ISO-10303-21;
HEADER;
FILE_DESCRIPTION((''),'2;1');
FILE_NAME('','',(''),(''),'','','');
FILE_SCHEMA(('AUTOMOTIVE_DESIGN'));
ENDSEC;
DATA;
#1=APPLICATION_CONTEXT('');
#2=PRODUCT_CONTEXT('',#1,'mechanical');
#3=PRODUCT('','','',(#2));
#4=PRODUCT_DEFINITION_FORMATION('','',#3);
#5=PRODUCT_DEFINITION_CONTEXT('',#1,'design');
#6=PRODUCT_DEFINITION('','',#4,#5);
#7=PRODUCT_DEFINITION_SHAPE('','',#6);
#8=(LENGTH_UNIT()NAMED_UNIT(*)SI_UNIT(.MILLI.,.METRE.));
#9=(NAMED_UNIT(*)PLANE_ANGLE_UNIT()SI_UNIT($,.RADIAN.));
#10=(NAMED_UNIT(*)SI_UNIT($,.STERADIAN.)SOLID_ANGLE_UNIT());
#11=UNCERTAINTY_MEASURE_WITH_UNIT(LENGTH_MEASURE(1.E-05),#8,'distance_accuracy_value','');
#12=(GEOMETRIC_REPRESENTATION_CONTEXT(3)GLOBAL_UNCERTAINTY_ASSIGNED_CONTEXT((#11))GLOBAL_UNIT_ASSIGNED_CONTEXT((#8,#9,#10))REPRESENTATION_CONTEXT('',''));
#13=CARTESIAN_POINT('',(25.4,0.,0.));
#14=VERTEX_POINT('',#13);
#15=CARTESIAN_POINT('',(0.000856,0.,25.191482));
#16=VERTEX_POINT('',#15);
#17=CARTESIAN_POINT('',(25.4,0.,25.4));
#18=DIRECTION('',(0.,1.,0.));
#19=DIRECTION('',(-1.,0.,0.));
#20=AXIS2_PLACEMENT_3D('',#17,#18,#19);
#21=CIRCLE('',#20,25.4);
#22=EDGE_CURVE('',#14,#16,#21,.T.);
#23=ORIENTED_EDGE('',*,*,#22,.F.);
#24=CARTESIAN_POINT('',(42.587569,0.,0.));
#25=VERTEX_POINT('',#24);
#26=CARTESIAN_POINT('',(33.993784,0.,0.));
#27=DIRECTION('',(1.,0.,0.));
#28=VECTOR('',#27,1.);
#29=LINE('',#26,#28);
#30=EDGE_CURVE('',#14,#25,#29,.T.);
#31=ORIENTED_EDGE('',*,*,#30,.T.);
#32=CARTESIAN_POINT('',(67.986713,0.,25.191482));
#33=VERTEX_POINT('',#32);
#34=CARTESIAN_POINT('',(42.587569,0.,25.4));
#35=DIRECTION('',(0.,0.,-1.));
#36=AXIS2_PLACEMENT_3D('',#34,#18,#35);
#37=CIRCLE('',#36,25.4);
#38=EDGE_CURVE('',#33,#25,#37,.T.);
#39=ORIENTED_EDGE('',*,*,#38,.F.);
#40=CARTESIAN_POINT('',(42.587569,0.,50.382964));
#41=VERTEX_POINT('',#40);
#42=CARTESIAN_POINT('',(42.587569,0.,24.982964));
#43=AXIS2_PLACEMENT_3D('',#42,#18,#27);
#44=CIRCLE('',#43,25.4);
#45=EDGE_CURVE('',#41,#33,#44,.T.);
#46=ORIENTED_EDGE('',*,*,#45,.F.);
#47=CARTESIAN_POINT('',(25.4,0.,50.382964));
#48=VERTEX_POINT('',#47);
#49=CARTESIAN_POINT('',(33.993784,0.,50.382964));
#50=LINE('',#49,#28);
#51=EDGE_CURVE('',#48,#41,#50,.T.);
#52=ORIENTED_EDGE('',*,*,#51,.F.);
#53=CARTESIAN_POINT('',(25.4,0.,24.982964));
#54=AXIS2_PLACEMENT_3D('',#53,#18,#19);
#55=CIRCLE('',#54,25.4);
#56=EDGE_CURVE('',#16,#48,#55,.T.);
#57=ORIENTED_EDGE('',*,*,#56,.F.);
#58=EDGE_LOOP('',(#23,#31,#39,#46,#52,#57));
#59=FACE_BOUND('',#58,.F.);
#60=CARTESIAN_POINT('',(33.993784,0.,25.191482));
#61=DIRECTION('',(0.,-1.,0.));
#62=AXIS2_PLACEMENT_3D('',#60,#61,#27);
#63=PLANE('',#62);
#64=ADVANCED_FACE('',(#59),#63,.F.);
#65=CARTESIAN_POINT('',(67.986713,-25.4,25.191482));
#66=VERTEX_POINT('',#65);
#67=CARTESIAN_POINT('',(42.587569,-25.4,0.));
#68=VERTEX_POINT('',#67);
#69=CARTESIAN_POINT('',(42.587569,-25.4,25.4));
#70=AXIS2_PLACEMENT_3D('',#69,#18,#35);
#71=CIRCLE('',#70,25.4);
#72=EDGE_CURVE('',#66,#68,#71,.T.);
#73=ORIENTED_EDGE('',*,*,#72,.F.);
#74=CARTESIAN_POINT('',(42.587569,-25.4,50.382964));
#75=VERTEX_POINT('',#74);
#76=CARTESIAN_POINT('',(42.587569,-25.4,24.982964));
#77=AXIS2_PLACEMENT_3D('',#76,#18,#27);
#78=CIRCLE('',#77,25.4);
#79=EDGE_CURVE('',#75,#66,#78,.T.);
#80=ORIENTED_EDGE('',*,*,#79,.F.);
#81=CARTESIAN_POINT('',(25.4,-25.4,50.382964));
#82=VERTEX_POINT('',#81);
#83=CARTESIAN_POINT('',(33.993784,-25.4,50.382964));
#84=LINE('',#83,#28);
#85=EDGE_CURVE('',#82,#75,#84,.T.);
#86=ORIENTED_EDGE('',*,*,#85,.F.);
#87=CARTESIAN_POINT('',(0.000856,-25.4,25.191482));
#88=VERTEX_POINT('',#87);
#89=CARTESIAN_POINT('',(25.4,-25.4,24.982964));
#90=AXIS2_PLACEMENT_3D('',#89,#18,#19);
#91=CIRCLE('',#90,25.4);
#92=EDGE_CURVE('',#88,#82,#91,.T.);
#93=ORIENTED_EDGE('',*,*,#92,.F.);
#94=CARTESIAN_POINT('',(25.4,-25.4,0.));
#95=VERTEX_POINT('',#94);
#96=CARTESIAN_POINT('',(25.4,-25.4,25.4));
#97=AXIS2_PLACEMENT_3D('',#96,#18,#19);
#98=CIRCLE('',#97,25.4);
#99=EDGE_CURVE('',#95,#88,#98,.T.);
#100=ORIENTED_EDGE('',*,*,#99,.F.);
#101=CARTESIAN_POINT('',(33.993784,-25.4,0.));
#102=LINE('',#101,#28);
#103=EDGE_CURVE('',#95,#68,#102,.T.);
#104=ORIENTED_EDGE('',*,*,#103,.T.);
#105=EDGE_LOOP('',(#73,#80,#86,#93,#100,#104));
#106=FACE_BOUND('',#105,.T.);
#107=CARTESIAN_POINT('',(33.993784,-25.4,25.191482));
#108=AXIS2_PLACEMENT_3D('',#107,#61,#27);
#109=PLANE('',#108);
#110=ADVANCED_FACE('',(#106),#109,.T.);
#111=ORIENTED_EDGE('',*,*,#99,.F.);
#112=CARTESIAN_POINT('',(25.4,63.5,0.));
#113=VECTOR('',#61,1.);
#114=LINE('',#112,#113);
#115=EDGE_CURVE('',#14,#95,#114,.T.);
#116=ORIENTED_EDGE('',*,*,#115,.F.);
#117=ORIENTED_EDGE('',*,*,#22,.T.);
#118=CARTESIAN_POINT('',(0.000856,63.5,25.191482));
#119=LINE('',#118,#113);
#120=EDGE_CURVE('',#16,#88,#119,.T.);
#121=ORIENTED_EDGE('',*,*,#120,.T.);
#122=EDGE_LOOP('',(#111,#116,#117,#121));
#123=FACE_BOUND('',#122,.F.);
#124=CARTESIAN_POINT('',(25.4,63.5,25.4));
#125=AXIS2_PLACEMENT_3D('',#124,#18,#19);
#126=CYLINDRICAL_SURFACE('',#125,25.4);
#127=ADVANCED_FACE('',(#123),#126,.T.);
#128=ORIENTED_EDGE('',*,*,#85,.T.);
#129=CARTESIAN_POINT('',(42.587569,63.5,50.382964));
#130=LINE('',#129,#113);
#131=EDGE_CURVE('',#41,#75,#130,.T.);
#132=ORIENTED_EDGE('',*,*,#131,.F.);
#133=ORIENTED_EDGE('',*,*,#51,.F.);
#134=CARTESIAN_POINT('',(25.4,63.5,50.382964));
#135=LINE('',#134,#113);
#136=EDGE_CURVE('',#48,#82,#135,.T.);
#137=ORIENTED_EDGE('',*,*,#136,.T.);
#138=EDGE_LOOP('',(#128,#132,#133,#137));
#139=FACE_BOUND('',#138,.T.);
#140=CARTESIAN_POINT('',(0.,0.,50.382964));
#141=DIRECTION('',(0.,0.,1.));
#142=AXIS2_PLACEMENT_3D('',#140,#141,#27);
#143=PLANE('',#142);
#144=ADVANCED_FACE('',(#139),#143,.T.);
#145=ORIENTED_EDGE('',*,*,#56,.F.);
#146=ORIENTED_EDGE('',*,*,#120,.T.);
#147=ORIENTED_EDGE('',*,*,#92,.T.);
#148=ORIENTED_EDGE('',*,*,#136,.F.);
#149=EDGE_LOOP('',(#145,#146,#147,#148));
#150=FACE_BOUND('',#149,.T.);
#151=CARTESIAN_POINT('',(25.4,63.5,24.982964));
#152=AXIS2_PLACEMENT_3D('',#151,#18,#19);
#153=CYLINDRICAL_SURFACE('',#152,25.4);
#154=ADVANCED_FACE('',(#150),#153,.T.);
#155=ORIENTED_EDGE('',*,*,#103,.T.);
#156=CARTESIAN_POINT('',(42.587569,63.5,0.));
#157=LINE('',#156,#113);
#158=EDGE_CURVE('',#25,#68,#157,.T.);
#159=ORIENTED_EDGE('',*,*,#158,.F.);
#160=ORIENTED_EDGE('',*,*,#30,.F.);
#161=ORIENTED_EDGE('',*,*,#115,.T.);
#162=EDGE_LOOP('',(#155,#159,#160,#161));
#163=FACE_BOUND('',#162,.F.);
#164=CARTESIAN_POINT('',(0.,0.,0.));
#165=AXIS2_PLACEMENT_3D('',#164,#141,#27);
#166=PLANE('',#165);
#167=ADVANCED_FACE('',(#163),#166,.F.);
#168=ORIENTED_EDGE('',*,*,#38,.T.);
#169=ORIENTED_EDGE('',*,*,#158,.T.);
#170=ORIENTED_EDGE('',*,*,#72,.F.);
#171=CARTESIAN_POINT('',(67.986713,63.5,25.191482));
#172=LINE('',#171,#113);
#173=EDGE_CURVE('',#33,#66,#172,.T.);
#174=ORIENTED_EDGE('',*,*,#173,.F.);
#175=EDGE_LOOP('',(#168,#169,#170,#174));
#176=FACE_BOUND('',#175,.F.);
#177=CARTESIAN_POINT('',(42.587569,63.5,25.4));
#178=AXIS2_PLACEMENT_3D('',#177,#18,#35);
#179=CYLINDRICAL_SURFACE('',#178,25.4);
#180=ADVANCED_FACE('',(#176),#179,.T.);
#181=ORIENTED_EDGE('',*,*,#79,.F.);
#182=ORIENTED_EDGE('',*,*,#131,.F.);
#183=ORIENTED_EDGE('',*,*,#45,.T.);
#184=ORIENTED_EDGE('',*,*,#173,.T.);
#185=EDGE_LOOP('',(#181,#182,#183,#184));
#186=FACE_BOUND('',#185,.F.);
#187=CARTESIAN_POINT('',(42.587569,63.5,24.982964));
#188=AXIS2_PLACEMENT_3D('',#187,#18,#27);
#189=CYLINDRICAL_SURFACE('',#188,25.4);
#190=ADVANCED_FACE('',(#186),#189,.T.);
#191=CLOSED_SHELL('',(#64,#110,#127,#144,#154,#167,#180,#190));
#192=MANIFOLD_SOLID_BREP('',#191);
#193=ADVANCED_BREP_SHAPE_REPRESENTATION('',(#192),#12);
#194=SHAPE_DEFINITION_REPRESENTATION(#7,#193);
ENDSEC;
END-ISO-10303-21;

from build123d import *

# Parameters (mm, degrees)
F0_W        = 67.9875686765
F0_H        = 50.382964313
F1_DEPTH    = 25.4
F2_T1_DEPTH = 152.4


# Not quite as in the source:
# - a fillet or chamfer that OpenCascade refuses, or shapes differently, is made with other operations: its cross-section is extruded or revolved along the edge and cut away or added


with BuildPart() as f1:
    # F0 (on Front) → F1 (new body)
    with BuildSketch(Plane.XZ):
        with Locations((33.9937843382, 25.1914821565)):
            Rectangle(F0_W, F0_H)
    extrude(amount=F1_DEPTH)

    # F2: fillet of radius 25.4 on 4 edges, made by hand

    # F2_s2 → F2_t1 (cut)
    with BuildSketch(Plane.XZ.offset(-63.5)):
        with BuildLine():
            ThreePointArc((0, 24.982964313), (7.4394877579, 42.9434765552), (25.4, 50.382964313))
            Line((25.4, 50.382964313), (0, 50.382964313))
            Line((0, 50.382964313), (0, 24.982964313))
        make_face()
        with BuildLine():
            ThreePointArc((67.9875686765, 24.982964313), (60.5480809186, 42.9434765552), (42.5875686765, 50.382964313))
            Line((42.5875686765, 50.382964313), (67.9875686765, 50.382964313))
            Line((67.9875686765, 50.382964313), (67.9875686765, 24.982964313))
        make_face()
        with BuildLine():
            ThreePointArc((0, 25.4), (7.4394877579, 7.4394877579), (25.4, 0))
            Line((25.4, 0), (0, 0))
            Line((0, 0), (0, 25.4))
        make_face()
        with BuildLine():
            ThreePointArc((42.5875686765, 0), (60.5480809186, 7.4394877579), (67.9875686765, 25.4))
            Line((67.9875686765, 25.4), (67.9875686765, 0))
            Line((67.9875686765, 0), (42.5875686765, 0))
        make_face()
    extrude(amount=F2_T1_DEPTH, mode=Mode.SUBTRACT)


solid = f1.part
